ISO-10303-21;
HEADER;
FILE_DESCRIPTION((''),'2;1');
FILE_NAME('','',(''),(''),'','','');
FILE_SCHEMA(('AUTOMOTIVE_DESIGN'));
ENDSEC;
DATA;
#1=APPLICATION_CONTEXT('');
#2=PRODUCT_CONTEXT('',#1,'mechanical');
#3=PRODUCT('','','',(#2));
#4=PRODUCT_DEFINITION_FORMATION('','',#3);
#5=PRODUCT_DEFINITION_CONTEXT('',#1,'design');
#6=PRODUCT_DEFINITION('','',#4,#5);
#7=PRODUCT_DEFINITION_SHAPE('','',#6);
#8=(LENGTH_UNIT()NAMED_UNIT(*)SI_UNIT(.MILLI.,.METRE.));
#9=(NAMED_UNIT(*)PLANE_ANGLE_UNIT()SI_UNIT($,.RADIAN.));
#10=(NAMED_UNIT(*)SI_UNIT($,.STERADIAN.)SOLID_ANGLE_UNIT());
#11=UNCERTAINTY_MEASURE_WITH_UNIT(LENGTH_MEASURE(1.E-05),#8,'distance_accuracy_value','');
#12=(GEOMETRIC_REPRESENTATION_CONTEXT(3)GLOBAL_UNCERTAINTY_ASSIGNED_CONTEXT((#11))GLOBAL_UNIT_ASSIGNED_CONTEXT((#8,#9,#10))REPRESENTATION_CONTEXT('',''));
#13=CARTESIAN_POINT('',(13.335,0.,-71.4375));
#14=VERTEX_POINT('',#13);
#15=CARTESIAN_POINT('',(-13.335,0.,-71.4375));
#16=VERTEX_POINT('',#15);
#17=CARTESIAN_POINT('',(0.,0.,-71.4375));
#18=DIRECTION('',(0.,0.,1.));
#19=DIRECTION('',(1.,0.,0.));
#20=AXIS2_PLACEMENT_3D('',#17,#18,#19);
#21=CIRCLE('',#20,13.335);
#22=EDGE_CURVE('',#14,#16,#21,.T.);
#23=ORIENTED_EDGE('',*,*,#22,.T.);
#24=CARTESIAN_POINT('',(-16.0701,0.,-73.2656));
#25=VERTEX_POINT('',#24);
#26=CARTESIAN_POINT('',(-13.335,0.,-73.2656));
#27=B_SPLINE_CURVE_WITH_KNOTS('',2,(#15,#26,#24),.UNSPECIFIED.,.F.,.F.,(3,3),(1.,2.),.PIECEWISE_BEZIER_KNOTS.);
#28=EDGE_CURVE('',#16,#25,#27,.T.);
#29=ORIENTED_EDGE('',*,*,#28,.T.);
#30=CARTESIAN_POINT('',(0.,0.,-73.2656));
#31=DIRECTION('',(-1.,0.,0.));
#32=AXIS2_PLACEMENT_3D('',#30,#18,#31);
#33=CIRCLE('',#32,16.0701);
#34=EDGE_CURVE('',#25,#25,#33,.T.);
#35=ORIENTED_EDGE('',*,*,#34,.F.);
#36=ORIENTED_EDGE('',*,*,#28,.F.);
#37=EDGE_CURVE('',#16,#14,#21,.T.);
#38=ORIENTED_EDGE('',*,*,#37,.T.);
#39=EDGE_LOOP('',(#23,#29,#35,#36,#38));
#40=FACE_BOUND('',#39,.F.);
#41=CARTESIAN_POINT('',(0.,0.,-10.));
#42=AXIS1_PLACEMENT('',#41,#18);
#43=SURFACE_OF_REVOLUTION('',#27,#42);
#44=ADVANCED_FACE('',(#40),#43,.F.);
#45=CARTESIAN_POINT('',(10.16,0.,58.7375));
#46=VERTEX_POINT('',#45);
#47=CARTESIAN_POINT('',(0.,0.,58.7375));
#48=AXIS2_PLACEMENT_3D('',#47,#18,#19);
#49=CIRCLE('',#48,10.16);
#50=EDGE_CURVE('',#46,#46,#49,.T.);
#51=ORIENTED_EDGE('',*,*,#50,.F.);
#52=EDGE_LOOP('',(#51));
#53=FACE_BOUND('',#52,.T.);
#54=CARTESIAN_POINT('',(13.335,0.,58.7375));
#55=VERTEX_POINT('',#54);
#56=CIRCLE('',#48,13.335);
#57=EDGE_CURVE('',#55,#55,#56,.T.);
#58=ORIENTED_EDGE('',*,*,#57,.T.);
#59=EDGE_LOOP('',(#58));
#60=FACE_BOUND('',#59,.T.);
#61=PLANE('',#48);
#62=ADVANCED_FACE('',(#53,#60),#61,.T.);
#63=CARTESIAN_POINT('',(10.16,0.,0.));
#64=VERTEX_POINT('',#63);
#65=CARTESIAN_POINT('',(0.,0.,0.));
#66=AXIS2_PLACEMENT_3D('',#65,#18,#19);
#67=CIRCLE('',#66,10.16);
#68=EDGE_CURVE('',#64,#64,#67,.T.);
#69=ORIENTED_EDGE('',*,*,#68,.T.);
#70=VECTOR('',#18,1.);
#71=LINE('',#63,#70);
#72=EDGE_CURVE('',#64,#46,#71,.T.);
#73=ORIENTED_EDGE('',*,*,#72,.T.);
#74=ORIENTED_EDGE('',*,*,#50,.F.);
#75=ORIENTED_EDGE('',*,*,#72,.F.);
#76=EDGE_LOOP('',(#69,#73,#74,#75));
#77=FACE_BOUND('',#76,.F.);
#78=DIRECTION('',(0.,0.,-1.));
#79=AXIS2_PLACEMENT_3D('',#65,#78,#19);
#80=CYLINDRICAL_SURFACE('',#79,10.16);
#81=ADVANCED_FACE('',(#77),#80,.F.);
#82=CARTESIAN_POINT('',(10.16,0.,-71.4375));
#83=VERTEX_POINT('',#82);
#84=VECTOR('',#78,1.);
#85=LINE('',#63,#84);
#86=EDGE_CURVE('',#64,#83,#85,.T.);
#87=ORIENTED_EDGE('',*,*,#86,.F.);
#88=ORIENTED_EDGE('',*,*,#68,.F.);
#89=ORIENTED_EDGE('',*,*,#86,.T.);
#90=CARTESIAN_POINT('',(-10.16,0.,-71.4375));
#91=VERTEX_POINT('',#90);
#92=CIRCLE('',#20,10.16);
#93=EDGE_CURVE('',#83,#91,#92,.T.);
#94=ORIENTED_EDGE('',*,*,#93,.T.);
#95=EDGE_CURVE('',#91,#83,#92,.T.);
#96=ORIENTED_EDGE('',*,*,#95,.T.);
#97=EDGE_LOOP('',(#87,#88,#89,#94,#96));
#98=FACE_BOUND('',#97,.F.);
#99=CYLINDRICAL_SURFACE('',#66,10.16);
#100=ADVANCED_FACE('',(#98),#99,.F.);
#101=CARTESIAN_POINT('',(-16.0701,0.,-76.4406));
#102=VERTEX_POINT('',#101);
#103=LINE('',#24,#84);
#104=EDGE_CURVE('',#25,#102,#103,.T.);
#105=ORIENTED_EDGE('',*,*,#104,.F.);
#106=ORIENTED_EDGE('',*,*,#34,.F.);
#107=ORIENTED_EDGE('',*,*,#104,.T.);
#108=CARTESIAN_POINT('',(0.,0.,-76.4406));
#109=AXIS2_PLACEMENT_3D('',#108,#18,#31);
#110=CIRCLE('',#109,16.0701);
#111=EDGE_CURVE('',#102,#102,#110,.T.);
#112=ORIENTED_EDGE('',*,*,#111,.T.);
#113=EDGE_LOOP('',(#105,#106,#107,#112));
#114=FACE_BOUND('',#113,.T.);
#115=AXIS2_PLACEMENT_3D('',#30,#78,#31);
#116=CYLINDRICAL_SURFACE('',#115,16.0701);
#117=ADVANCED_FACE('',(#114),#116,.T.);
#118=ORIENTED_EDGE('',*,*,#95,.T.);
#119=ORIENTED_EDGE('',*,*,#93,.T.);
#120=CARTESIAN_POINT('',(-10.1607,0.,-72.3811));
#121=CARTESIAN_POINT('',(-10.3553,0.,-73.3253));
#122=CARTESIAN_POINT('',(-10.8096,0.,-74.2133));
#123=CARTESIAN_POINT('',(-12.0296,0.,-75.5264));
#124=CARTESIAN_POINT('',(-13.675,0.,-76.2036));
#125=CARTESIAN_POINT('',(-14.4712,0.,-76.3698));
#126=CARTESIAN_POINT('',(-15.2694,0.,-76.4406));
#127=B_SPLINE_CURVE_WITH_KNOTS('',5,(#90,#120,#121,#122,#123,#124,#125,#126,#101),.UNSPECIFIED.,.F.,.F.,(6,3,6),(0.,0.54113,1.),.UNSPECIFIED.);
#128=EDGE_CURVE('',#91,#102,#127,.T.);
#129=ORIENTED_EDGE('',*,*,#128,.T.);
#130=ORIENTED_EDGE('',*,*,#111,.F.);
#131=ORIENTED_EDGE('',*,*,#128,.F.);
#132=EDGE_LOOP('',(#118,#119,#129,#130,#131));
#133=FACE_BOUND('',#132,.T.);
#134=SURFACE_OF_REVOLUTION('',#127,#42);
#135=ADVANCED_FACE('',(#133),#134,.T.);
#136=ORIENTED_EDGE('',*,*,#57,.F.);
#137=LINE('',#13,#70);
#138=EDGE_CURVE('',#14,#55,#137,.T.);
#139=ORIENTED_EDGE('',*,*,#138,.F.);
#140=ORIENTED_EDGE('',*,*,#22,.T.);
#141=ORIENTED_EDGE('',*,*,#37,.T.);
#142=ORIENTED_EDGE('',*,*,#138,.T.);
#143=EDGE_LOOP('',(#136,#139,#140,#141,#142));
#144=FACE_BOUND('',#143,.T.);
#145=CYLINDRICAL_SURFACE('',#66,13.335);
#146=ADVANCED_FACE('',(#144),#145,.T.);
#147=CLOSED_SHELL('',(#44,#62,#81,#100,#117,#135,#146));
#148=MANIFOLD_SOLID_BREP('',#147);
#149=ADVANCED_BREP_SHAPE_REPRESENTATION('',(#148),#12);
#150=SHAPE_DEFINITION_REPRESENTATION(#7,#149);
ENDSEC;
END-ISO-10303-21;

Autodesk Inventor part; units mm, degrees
ref_plane "YZ Plane" through (0, 0, 0) normal (1, 0, 0) x (0, 1, 0)
ref_plane "XZ Plane" through (0, 0, 0) normal (0, 1, 0) x (-1, 0, 0)
ref_plane "XY Plane" through (0, 0, 0) normal (0, 0, 1) x (1, 0, 0)
sketch "Sketch1" plane through (0, 0, 0) normal (0, 0, 1) x (1, 0, 0)
  circle A0 centre (0, 0) radius 13.335
  circle A1 centre (0, 0) radius 10.16
  dimension "d1" = 20.32
  dimension "d5" = 26.67
extrude "Extrusion1" add sketch "Sketch1" along normal blind 58.7375 and the other way blind 71.4375
sketch "Sketch2" plane through (0, 0, 0) normal (0, 1, 0) x (-1, 0, 0)
  line L0 (10.16, -71.4375) -> (10.16, 58.7375) construction
  line L1 (10.16, 58.7375) -> (13.335, 58.7375) construction
  line L2 (13.335, 58.7375) -> (13.335, -71.4375) construction
  line L3 (13.335, -71.4375) -> (10.16, -71.4375) projected
  line L4 (-10.16, 58.7375) -> (-10.16, -71.4375) construction
  line L5 (-10.16, -71.4375) -> (-13.335, -71.4375) construction
  line L6 (-13.335, -71.4375) -> (-13.335, 58.7375) construction
  line L7 (-13.335, 58.7375) -> (-10.16, 58.7375) construction
  line L8 (13.335, -71.4375) -> (13.335, -73.2656) construction
  line L9 (13.335, -73.2656) -> (16.0701, -73.2656) construction
  spline S0 degree 2 poles (13.335, -71.4375) (13.335, -73.2656) (16.0701, -73.2656) knots 1 1 1 2 2 2
  line L10 (16.0701, -73.2656) -> (16.0701, -76.4406)
  line L11 (0, -105.1255) -> (0, 86.048) projected
  spline S1 degree 5 poles (10.16, -71.4375) (10.1607, -72.3811) (10.3553, -73.3253) (10.8096, -74.2133) (12.0296, -75.5264) (13.675, -76.2036) (14.4712, -76.3698) (15.2694, -76.4406) (16.0701, -76.4406) knots 0 0 0 0 0 0 0.54113 0.54113 0.54113 1 1 1 1 1 1
  point P0 (0, 0)
revolve "Revolution1" add sketch "Sketch2" angle 360 about axis through (0, 0, -10) along (0, 0, 1)
properties part number "pipe" material "PVC-Piping"
